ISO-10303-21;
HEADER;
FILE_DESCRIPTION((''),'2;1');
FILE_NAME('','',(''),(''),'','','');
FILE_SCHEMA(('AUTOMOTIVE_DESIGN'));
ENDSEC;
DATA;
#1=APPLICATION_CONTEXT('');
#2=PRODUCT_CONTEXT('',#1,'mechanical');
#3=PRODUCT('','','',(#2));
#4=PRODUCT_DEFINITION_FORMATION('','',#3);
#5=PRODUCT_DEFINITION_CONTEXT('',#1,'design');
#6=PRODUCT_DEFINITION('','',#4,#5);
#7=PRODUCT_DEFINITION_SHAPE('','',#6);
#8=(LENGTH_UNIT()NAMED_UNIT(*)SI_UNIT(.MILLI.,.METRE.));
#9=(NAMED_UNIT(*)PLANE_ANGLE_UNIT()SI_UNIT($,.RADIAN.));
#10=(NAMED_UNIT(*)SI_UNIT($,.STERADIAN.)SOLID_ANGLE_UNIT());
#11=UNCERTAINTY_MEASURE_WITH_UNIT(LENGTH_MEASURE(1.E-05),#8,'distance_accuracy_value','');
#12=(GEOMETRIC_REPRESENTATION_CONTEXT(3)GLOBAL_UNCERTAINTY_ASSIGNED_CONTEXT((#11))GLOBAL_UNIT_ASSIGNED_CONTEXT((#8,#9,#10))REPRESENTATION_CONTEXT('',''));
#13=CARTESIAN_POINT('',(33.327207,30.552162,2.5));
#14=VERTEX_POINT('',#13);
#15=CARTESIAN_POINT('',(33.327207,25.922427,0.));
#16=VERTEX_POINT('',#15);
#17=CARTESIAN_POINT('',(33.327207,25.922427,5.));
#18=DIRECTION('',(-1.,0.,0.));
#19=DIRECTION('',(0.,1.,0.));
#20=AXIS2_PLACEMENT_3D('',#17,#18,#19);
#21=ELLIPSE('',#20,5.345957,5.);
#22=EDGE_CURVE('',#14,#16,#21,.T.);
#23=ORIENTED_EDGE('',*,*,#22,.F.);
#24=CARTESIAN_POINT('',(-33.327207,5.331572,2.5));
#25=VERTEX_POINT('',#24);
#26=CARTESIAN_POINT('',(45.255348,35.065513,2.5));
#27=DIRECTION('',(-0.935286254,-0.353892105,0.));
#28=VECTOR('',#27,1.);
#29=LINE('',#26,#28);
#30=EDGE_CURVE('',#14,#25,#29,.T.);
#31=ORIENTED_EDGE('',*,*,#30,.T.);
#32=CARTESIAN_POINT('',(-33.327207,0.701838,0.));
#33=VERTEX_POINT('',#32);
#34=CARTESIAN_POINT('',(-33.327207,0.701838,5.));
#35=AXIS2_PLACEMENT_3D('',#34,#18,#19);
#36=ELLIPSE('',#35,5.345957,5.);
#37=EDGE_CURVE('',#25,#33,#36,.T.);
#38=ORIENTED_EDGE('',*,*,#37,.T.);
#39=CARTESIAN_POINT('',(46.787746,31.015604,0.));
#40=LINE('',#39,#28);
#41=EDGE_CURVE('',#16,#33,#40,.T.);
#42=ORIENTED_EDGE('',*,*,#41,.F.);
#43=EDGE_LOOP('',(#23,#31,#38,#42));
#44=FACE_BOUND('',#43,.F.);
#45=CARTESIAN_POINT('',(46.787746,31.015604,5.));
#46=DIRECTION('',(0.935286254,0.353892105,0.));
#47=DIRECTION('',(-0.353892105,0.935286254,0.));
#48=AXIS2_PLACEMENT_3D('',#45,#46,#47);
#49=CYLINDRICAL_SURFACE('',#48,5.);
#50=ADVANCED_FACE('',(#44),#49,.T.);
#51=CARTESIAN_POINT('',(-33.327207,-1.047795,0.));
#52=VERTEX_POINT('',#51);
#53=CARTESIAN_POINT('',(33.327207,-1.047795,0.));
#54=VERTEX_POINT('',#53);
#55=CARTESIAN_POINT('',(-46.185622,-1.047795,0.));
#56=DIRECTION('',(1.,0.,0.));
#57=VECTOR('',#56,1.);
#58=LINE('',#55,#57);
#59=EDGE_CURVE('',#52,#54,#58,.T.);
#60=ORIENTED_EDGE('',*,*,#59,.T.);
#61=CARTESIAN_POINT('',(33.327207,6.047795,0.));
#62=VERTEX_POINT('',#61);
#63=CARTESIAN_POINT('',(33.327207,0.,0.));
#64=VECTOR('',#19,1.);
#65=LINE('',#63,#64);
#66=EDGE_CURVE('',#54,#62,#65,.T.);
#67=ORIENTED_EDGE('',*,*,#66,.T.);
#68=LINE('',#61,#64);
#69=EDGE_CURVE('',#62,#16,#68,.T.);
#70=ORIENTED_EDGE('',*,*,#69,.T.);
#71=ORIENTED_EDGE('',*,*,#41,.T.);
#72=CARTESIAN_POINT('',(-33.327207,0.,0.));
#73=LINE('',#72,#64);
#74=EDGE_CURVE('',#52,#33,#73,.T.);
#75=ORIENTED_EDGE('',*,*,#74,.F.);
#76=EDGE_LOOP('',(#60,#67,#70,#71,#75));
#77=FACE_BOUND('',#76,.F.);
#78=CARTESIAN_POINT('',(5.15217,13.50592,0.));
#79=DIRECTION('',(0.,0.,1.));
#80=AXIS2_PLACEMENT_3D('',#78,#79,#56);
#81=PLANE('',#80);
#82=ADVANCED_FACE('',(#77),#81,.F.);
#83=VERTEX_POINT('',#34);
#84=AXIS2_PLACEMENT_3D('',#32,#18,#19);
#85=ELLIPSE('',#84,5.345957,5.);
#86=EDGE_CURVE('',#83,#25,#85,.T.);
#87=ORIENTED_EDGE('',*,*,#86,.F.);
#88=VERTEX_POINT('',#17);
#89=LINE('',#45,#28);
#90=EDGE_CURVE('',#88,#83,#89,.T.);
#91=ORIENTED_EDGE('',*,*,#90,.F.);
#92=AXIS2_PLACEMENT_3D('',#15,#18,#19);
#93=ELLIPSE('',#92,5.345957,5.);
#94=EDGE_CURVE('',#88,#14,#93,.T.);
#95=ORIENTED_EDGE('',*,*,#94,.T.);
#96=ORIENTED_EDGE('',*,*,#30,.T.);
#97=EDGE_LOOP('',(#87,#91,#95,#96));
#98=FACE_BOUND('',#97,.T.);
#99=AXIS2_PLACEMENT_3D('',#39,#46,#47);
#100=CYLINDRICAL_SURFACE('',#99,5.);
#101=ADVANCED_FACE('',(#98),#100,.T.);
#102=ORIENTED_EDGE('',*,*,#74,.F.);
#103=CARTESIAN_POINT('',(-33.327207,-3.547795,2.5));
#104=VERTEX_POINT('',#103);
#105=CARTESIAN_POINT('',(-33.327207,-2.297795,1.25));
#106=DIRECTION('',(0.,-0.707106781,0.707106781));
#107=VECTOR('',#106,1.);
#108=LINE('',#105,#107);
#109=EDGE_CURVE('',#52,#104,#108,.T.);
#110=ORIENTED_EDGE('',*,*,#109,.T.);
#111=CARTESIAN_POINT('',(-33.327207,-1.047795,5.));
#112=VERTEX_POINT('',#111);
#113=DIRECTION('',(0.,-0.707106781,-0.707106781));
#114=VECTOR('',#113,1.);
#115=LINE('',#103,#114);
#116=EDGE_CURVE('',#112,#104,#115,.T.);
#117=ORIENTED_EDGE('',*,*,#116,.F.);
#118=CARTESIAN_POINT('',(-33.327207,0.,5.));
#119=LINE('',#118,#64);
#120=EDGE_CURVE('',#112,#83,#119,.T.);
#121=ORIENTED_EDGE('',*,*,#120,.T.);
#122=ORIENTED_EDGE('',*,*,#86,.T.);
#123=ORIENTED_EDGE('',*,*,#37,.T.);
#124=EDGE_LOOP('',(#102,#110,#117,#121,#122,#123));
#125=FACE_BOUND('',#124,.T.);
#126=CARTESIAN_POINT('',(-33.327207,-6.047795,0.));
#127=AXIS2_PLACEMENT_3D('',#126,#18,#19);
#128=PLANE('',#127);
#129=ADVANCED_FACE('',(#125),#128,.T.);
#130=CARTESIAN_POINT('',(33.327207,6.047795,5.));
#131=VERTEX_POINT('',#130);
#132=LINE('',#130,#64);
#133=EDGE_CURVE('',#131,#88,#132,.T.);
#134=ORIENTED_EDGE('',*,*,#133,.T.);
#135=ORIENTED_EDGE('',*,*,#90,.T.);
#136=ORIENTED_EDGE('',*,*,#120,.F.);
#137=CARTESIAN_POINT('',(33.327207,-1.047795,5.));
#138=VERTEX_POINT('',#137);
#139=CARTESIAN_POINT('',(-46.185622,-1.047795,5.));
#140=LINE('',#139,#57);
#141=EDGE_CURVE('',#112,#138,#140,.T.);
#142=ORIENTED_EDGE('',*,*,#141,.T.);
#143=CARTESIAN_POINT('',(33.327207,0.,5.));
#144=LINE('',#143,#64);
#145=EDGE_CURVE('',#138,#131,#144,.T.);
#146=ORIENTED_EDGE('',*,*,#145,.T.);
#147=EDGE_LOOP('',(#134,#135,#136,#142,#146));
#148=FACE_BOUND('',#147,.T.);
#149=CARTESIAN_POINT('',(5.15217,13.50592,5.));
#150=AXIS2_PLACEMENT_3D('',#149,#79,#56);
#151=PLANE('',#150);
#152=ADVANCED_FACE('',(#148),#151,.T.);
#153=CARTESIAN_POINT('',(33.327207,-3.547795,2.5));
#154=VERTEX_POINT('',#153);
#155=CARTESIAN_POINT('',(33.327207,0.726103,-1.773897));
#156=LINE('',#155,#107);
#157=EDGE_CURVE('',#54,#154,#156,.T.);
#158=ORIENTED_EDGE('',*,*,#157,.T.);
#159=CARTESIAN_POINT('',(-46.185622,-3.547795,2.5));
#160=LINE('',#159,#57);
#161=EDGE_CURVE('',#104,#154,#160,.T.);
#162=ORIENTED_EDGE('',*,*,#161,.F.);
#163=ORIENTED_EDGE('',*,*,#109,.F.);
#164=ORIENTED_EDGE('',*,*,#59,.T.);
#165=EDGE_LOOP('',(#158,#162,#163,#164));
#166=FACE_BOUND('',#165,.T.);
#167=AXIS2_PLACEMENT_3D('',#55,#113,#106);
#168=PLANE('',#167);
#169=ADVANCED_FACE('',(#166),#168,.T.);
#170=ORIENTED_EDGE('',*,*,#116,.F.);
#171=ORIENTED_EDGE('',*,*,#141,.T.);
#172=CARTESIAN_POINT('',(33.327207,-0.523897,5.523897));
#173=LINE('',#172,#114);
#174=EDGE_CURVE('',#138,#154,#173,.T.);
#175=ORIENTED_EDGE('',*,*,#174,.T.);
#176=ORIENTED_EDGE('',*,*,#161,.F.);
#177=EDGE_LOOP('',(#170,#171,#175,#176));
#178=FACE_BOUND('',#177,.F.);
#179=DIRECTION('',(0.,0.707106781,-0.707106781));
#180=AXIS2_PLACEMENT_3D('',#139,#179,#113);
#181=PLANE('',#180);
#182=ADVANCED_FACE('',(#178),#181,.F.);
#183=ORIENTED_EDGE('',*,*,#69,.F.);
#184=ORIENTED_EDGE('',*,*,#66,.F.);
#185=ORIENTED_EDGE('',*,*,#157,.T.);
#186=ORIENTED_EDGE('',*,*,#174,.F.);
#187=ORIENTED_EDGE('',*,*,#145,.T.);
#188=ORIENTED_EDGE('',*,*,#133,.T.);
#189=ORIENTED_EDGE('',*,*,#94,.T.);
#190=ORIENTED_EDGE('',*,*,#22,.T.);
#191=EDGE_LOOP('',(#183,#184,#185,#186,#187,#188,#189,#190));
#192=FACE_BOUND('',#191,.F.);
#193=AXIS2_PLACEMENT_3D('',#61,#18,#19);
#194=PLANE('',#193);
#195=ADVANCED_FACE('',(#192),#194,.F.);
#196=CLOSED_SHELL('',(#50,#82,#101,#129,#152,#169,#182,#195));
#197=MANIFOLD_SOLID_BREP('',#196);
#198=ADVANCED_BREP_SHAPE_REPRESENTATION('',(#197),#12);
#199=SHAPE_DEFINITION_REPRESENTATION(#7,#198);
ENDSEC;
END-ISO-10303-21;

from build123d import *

# Parameters (mm, degrees)
F0_W        = 66.6544139385
F0_H        = 12.0955891907
F1_DEPTH    = 5
F2_T1_DEPTH = 96.2663247468
F3_T1_DEPTH = 92.3712438182


# Not quite as in the source:
# - a fillet or chamfer that OpenCascade refuses, or shapes differently, is made with other operations: its cross-section is extruded or revolved along the edge and cut away or added


with BuildPart() as f1:
    # F0 (on Top) → F1 (new body)
    with BuildSketch(Plane.XY):
        Polygon((-33.3272069693, 6.0477945954), (33.3272069693, 6.0477945954), (33.3272069693, 31.2683843076), align=None)
        Rectangle(F0_W, F0_H)
    extrude(amount=F1_DEPTH)

    # F2: fillet of radius 5 on 2 edges, made by hand

    # F2_s2 → F2_t1 (cut)
    with BuildSketch(Plane(origin=(51.1939340465, 19.37067825, 0), x_dir=(0, 0, 1), z_dir=(-0.9352862544, -0.3538921054, 0))):
        with BuildLine():
            ThreePointArc((0, 17.4506545977), (3.5355339059, 15.9861885036), (5, 12.4506545977))
            Line((5, 12.4506545977), (5, 17.4506545977))
            Line((5, 17.4506545977), (0, 17.4506545977))
        make_face()
        with BuildLine():
            ThreePointArc((5, 17.4506545977), (1.4644660941, 15.9861885036), (0, 12.4506545977))
            Line((0, 12.4506545977), (0, 17.4506545977))
            Line((0, 17.4506545977), (5, 17.4506545977))
        make_face()
    extrude(amount=F2_T1_DEPTH, mode=Mode.SUBTRACT)

    # F3: chamfer of 5 on 2 edges, made by hand

    # F3_s2 → F3_t1 (cut)
    with BuildSketch(Plane.YZ.offset(-46.1856219091)):
        Polygon((-1.0477945954, 5), (-6.0477945954, 0), (-6.0477945954, 5), align=None)
        Polygon((-1.0477945954, 0), (-6.0477945954, 5), (-6.0477945954, 0), align=None)
    extrude(amount=F3_T1_DEPTH, mode=Mode.SUBTRACT)


solid = f1.part
